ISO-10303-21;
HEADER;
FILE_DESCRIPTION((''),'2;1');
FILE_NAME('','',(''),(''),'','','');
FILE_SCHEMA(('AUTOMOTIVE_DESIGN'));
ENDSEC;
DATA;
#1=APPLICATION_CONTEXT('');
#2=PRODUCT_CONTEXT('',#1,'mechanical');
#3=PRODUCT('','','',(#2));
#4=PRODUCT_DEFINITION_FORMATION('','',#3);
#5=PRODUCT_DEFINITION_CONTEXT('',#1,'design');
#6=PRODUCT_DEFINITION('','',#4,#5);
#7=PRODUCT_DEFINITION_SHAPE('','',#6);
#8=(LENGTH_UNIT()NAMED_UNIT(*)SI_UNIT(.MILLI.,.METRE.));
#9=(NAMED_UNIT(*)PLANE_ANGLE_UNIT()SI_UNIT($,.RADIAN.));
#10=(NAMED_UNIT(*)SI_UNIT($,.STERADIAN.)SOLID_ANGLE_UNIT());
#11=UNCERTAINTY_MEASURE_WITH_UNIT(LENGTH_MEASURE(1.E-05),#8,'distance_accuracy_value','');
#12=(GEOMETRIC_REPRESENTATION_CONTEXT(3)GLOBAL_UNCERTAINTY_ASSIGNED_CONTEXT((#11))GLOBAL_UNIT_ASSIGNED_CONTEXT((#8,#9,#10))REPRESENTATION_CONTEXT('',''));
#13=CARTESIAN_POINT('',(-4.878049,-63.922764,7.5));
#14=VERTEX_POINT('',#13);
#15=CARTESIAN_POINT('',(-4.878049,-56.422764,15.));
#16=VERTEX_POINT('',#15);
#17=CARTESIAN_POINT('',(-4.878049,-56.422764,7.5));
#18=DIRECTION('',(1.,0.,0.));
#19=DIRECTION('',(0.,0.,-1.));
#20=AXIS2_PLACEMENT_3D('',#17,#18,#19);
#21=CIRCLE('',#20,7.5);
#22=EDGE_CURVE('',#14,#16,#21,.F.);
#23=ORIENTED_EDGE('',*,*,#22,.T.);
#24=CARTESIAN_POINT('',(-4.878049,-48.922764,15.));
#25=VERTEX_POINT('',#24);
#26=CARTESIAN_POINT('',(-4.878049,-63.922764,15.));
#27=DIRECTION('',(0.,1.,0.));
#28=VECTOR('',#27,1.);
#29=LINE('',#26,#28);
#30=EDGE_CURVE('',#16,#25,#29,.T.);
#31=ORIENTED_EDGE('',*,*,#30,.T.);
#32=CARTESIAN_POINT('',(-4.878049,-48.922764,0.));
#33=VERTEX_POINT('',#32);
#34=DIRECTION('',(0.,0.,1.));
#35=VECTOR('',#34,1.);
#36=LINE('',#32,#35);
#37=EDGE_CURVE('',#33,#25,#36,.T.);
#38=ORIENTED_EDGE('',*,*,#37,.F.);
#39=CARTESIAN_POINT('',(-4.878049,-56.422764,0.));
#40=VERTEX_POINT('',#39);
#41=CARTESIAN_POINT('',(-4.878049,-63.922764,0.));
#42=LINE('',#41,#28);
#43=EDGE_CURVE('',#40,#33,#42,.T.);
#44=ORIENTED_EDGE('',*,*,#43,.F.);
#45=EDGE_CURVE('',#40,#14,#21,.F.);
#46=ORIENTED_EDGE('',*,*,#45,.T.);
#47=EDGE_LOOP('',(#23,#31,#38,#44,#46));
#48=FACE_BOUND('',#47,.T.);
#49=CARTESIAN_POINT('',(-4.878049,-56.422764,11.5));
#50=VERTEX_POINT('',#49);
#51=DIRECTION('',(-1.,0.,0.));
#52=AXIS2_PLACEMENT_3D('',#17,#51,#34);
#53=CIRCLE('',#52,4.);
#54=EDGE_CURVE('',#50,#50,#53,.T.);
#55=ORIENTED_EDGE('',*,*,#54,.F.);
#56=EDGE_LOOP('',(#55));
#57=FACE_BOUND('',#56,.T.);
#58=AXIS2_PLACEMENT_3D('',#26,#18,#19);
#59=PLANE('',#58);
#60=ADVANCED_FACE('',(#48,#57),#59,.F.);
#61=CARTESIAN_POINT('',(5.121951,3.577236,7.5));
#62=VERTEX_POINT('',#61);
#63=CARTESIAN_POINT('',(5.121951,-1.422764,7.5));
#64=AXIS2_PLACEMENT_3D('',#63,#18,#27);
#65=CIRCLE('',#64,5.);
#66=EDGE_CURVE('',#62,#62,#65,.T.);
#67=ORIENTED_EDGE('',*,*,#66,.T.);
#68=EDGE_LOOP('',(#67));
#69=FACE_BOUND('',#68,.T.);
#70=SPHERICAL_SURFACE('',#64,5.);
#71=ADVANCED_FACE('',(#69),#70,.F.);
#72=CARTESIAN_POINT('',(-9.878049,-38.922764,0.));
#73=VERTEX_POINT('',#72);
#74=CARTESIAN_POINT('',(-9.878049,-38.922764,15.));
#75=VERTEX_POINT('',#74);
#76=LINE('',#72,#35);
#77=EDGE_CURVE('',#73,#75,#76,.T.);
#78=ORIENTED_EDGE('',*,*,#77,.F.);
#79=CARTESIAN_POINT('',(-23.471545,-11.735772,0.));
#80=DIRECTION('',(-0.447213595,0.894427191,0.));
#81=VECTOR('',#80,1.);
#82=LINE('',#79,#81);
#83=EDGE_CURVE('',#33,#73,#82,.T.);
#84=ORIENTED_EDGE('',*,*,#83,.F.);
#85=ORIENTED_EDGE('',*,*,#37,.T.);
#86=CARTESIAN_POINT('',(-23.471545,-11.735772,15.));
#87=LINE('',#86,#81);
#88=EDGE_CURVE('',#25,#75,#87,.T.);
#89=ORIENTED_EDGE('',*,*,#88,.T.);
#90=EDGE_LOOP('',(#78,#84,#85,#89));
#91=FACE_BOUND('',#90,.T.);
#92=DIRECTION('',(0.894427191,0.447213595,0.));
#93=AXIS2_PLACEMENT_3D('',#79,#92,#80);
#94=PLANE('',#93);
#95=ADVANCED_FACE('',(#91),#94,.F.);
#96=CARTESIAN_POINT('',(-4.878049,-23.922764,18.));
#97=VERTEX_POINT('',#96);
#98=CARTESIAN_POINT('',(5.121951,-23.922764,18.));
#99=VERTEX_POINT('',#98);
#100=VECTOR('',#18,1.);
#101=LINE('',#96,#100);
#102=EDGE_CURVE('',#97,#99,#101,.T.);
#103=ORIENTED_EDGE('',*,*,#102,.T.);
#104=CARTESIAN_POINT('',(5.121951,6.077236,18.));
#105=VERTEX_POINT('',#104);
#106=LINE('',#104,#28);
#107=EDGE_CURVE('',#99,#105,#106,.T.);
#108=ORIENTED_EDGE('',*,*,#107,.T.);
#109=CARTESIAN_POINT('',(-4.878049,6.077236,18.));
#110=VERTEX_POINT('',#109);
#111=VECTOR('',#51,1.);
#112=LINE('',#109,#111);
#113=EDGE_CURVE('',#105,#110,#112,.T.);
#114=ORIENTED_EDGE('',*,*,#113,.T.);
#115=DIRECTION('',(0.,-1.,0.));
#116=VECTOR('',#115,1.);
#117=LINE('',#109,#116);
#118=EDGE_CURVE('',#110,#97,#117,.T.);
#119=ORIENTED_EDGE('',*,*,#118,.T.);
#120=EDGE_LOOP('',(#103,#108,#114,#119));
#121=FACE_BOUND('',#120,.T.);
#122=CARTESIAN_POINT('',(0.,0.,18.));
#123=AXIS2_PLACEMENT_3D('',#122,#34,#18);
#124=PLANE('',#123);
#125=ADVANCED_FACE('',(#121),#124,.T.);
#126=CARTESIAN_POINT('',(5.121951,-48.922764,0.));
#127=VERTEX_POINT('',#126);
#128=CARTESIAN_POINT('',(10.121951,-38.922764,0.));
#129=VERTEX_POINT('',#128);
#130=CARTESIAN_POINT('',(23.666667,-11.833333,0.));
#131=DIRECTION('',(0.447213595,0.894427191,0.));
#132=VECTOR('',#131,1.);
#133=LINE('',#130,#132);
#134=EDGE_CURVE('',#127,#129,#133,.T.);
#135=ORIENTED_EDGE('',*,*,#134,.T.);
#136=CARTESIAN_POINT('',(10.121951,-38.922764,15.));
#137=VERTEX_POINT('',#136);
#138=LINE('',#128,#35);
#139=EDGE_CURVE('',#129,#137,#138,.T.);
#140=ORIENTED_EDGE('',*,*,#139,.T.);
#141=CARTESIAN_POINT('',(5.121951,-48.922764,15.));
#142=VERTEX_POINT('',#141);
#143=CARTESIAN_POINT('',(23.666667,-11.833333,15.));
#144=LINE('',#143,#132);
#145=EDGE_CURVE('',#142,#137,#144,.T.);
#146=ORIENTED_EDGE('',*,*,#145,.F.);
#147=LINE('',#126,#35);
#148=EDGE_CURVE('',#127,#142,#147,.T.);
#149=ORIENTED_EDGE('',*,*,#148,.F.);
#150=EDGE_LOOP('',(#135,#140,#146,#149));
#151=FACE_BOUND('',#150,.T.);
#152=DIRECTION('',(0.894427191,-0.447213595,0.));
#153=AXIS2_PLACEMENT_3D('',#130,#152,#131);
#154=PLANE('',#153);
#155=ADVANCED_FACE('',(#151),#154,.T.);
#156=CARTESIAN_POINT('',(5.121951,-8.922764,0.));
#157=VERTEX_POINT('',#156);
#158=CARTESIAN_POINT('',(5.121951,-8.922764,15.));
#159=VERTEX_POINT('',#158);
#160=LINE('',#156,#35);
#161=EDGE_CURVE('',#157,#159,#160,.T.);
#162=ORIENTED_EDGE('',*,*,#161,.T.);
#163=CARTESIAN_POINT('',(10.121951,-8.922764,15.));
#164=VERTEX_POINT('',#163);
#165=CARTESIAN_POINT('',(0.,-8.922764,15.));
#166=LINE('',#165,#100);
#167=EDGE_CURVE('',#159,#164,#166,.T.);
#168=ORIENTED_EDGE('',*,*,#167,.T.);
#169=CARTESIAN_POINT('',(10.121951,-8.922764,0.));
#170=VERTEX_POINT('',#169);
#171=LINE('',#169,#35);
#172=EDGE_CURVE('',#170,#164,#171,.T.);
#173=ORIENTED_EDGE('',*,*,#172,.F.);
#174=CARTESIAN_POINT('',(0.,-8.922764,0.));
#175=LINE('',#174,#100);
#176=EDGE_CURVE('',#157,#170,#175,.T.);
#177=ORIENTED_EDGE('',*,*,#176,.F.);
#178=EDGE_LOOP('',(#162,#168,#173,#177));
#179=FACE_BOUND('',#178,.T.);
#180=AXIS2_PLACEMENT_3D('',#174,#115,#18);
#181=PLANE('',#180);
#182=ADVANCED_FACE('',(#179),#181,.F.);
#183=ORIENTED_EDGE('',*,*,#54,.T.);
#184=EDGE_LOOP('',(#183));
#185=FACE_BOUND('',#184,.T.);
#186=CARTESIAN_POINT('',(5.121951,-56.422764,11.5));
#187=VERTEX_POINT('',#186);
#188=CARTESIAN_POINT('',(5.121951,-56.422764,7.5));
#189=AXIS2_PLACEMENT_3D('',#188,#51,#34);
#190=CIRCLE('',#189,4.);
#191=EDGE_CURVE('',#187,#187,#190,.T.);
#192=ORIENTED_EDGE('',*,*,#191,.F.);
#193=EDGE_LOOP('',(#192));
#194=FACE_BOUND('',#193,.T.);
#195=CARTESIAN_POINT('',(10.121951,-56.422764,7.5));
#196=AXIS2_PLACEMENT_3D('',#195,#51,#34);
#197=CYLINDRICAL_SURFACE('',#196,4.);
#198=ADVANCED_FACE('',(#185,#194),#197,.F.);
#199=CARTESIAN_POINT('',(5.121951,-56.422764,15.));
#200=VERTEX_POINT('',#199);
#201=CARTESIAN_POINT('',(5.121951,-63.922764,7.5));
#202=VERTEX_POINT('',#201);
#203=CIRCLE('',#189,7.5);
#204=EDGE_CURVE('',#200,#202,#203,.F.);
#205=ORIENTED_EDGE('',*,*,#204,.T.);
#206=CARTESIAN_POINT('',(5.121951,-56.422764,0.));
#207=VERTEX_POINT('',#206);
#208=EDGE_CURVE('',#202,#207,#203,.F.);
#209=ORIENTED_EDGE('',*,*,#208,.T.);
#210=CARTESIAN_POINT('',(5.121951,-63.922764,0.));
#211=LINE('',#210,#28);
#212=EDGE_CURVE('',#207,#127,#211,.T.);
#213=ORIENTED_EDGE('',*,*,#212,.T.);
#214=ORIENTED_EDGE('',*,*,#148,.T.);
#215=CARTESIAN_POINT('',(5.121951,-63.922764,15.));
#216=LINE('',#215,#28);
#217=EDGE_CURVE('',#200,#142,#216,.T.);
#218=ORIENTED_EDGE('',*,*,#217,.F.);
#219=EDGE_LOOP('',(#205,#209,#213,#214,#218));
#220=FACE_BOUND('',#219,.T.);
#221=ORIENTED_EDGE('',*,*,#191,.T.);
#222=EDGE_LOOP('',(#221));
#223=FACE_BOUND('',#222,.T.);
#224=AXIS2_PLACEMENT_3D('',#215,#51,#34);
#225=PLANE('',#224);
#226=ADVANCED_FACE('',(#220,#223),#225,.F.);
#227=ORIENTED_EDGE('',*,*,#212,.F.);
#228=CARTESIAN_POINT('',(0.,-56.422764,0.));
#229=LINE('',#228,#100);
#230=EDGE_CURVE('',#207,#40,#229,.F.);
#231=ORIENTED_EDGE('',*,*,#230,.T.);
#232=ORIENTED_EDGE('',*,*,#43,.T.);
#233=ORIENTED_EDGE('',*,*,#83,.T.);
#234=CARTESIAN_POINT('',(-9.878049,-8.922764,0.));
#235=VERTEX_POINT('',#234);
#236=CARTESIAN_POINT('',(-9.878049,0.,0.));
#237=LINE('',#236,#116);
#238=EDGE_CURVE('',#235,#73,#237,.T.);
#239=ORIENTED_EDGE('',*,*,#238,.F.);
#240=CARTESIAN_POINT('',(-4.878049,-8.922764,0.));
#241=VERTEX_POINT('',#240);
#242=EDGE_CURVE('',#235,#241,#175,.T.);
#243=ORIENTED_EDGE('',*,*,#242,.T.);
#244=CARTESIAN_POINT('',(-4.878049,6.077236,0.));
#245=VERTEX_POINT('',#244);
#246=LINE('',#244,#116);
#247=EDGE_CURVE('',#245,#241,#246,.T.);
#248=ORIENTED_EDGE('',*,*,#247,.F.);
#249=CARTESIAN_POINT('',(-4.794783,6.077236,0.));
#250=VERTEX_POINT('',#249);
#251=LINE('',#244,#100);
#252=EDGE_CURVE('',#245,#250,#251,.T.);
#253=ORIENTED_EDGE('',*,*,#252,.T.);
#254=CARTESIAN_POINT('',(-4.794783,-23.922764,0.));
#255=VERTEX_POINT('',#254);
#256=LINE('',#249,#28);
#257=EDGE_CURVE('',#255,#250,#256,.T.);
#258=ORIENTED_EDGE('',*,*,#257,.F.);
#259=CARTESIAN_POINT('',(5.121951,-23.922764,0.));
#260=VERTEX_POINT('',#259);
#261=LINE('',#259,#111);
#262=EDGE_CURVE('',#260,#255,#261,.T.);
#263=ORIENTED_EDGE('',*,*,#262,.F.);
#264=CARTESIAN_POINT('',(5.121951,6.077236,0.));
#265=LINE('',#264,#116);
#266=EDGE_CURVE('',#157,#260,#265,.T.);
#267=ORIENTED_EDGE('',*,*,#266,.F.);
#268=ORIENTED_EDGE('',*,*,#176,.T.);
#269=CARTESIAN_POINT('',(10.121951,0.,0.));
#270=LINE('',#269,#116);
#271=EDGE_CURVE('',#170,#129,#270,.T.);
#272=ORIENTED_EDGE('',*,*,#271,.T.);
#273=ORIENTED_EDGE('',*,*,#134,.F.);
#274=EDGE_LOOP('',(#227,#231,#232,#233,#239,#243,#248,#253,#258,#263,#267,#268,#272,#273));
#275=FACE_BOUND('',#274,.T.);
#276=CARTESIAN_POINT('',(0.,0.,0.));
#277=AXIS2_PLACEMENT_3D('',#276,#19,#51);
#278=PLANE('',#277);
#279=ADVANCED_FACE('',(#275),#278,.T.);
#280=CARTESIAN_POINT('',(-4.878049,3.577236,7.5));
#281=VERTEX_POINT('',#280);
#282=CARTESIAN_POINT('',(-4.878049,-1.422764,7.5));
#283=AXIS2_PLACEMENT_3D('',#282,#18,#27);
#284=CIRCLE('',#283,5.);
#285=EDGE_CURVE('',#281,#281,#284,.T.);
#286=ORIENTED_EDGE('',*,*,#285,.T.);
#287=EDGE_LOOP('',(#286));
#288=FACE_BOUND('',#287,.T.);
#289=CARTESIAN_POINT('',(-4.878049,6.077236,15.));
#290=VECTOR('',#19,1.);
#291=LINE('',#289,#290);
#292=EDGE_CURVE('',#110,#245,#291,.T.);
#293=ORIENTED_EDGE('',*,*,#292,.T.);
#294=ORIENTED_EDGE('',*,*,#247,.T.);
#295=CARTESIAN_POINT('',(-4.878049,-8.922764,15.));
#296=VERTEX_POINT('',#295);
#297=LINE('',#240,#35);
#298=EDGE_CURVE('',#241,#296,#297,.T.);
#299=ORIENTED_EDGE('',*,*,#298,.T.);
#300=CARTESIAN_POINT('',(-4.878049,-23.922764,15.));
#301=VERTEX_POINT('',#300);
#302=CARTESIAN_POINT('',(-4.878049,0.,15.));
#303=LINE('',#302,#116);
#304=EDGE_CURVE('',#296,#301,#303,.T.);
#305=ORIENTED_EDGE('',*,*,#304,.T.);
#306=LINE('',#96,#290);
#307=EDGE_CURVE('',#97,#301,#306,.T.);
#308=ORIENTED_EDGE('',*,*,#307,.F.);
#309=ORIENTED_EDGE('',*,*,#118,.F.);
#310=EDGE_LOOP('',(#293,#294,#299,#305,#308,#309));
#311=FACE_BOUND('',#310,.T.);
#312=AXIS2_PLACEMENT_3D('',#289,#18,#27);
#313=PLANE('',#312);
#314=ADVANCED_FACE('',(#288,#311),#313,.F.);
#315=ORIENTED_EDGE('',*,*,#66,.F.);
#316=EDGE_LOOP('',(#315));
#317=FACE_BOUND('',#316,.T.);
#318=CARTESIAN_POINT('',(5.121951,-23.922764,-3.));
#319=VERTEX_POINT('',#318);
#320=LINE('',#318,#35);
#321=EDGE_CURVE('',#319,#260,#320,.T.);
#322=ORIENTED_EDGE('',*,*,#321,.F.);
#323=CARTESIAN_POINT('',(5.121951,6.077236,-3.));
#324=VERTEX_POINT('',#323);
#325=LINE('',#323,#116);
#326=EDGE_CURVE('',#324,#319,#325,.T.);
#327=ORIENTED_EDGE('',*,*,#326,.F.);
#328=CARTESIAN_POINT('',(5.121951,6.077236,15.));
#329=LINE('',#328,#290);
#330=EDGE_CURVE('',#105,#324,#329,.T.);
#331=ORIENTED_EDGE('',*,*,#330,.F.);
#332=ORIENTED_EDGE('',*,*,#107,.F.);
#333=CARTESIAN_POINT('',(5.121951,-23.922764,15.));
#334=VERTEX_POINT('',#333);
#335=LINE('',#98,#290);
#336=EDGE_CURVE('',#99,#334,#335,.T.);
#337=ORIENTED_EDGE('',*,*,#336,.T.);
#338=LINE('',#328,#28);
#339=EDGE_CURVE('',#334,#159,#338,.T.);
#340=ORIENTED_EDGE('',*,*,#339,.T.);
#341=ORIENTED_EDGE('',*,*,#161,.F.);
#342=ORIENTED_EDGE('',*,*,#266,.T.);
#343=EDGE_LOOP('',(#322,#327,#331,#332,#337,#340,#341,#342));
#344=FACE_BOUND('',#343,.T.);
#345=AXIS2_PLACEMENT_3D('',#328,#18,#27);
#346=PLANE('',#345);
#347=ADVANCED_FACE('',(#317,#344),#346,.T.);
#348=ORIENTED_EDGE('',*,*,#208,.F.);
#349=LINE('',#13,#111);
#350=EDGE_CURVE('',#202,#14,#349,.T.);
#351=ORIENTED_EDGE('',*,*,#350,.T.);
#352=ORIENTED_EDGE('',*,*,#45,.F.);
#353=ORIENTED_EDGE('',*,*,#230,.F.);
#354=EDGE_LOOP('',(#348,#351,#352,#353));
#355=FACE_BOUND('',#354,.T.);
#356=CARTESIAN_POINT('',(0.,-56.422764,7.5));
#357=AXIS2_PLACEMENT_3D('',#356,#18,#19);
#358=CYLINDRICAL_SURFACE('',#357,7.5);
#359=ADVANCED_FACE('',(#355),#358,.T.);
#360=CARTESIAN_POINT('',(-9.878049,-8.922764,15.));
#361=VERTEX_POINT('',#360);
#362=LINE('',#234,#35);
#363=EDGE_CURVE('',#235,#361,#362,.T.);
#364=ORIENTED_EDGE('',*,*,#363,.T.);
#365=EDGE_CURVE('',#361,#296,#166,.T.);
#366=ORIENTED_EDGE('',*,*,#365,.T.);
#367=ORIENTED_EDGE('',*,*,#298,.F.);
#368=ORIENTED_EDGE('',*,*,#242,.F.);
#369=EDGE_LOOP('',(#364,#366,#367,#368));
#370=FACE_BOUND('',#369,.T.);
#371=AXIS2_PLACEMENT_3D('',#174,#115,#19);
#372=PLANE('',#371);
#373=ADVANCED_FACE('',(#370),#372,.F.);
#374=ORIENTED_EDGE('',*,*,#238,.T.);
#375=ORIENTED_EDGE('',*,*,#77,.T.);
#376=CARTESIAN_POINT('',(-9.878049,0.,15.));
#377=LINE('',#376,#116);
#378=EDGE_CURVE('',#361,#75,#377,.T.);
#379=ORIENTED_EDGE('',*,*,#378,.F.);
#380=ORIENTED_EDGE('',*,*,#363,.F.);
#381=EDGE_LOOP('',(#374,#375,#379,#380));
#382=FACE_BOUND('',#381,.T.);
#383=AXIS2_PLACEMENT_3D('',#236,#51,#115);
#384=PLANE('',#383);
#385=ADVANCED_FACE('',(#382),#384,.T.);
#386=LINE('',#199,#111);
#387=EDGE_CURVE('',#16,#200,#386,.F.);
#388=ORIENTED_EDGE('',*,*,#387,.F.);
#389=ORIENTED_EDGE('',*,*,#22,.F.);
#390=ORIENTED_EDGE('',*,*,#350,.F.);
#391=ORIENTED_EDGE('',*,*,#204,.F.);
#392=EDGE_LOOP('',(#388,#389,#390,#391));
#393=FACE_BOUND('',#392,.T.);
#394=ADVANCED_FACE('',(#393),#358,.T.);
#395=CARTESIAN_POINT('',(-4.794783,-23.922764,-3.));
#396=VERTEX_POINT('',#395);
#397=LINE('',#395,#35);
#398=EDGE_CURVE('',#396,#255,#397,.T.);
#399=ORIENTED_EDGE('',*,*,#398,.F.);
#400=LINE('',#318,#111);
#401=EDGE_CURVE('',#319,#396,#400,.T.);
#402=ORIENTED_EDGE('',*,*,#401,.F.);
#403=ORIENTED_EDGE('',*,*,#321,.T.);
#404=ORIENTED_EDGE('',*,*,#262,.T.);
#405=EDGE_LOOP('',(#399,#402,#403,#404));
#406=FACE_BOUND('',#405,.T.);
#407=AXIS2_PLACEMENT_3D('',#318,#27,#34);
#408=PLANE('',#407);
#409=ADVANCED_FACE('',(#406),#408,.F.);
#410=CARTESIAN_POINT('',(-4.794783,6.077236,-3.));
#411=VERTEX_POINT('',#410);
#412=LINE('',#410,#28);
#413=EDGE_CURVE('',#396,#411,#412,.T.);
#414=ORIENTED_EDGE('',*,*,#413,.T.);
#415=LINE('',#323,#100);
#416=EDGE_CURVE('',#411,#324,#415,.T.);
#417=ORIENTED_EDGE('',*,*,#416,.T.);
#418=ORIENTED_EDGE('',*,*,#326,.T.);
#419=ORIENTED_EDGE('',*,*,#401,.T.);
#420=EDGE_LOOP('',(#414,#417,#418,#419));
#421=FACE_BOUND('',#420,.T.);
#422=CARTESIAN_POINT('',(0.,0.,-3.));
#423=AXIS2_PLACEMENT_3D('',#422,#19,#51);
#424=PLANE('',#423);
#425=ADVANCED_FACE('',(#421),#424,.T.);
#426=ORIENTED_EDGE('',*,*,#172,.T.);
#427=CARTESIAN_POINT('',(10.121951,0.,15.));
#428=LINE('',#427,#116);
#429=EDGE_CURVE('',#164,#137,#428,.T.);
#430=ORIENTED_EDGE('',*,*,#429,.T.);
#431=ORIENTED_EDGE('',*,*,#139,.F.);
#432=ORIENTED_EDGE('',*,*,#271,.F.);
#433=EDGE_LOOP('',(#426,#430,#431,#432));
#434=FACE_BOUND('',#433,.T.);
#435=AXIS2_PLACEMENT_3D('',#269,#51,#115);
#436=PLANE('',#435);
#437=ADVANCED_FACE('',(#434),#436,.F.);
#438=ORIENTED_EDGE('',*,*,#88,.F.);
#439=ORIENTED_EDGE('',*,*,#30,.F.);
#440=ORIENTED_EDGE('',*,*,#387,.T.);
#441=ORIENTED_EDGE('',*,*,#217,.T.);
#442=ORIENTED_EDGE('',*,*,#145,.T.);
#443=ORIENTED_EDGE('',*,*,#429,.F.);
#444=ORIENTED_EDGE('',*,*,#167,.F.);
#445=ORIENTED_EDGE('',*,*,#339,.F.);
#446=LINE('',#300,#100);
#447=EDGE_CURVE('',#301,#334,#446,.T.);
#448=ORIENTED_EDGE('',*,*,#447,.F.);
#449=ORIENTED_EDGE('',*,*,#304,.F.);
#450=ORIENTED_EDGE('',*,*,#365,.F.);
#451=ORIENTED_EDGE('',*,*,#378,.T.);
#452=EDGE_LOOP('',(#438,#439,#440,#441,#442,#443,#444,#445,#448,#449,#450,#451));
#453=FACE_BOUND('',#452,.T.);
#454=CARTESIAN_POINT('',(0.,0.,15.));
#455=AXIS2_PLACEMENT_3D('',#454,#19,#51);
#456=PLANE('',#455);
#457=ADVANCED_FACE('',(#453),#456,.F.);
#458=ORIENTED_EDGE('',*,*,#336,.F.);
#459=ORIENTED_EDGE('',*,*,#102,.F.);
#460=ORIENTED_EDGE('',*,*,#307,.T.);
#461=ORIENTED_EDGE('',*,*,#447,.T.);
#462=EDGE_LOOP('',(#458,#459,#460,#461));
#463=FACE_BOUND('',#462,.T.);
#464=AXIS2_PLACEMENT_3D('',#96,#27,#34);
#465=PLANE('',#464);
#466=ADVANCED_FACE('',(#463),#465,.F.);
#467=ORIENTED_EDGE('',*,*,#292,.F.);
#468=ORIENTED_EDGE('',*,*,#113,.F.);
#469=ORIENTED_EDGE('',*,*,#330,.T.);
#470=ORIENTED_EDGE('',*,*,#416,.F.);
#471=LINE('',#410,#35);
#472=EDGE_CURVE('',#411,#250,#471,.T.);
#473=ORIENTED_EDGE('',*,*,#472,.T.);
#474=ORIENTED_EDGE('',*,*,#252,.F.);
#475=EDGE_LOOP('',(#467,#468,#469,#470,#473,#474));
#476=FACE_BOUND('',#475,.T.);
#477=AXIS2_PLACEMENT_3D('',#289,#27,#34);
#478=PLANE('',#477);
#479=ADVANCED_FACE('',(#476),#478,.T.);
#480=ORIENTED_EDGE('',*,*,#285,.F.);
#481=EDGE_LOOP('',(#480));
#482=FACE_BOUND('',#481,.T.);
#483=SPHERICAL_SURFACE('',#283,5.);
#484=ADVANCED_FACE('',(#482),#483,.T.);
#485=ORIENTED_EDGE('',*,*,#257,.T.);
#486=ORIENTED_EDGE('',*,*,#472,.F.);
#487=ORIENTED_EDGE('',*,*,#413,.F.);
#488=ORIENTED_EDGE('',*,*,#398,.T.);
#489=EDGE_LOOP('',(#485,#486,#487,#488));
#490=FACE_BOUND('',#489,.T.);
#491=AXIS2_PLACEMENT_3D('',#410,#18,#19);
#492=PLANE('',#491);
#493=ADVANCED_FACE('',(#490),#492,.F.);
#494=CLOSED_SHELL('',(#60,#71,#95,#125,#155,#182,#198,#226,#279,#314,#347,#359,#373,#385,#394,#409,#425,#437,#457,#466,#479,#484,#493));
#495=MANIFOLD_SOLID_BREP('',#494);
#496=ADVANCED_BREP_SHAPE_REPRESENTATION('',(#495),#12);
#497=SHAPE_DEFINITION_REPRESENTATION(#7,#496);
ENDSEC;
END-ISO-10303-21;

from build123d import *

# Parameters (mm, degrees)
SKETCH1_W            = 10
SKETCH1_H            = 30
BOSS_EXTRUDE1_DEPTH  = 15
BOSS_EXTRUDE5_DEPTH  = 15
SKETCH7_W            = 9.916734627
SKETCH7_H            = 30
BOSS_EXTRUDE7_DEPTH  = 3
SKETCH12_W           = 10
SKETCH12_H           = 15
BOSS_EXTRUDE9_DEPTH  = 15
SKETCH13_R           = 4
CUT_EXTRUDE3_DEPTH   = 15
FILLET2_R            = 7.5
SKETCH6_W            = 10
SKETCH6_H            = 30
BOSS_EXTRUDE11_DEPTH = 3


with BuildPart() as part:
    # Sketch1 → Boss-Extrude1 (new body)
    with BuildSketch(Plane.XY):
        with Locations((0.12195122, -8.922764228)):
            Rectangle(SKETCH1_W, SKETCH1_H)
    extrude(amount=BOSS_EXTRUDE1_DEPTH)

    # Sketch2 → Boss-Extrude5 (add)
    with BuildSketch(Plane.XY.offset(15)):
        Polygon((-4.87804878, -8.922764228), (-9.87804878, -8.922764228), (-9.87804878, -38.922764228), (-4.87804878, -48.922764228), (5.12195122, -48.922764228), (10.12195122, -38.922764228), (10.12195122, -8.922764228), (5.12195122, -8.922764228), (5.12195122, -23.922764228), (-4.87804878, -23.922764228), align=None)
    extrude(amount=-BOSS_EXTRUDE5_DEPTH)

    # Sketch7 → Boss-Extrude7 (add)
    with BuildSketch(Plane(origin=(0, 0, 0), x_dir=(-1, 0, 0), z_dir=(0, 0, -1))):
        with Locations((-0.163583906, -8.922764228)):
            Rectangle(SKETCH7_W, SKETCH7_H)
    extrude(amount=BOSS_EXTRUDE7_DEPTH)

    # Sketch12 → Boss-Extrude9 (add)
    with BuildSketch(Plane.XZ.offset(48.922764228)):
        with Locations((0.12195122, 7.5)):
            Rectangle(SKETCH12_W, SKETCH12_H)
    extrude(amount=BOSS_EXTRUDE9_DEPTH)

    # Sketch13 → Cut-Extrude3 (cut)
    with BuildSketch(Plane.ZY.offset(4.87804878)):
        with Locations((7.5, -56.422764228)):
            Circle(SKETCH13_R)
    extrude(amount=-CUT_EXTRUDE3_DEPTH, mode=Mode.SUBTRACT)

    # Fillet2
    fillet2_edges = [part.edges().sort_by_distance(p)[0] for p in [
        (0.12195122, -63.922764228, 0),
        (0.12195122, -63.922764228, 15),
    ]]
    fillet(fillet2_edges, radius=FILLET2_R - 0.0001)  # a hair under: the kernel refuses the full size

    # Sketch10 → Revolve3 (revolve)
    with BuildSketch(Plane.ZY.offset(4.87804878)):
        with BuildLine():
            Line((7.5, 3.577235772), (7.5, -6.422764228))
            ThreePointArc((7.5, -6.422764228), (2.5, -1.422764228), (7.5, 3.577235772))
        make_face()
    revolve(axis=Axis((-4.87804878, 3.577235772, 7.5), (0, -1, 0)))

    # Sketch15 → Cut-Revolve1 (revolve, cut)
    with BuildSketch(Plane(origin=(5.12195122, 0, 0), x_dir=(0, 0, -1), z_dir=(1, 0, 0))):
        with BuildLine():
            Line((-7.5, 3.577235772), (-7.5, -6.422764228))
            ThreePointArc((-7.5, -6.422764228), (-12.5, -1.422764228), (-7.5, 3.577235772))
        make_face()
    revolve(axis=Axis((5.12195122, 3.577235772, 7.5), (0, -1, 0)), mode=Mode.SUBTRACT)

    # Sketch6 → Boss-Extrude11 (add)
    with BuildSketch(Plane.XY.offset(15)):
        with Locations((0.12195122, -8.922764228)):
            Rectangle(SKETCH6_W, SKETCH6_H)
    extrude(amount=BOSS_EXTRUDE11_DEPTH)


solid = part.part
